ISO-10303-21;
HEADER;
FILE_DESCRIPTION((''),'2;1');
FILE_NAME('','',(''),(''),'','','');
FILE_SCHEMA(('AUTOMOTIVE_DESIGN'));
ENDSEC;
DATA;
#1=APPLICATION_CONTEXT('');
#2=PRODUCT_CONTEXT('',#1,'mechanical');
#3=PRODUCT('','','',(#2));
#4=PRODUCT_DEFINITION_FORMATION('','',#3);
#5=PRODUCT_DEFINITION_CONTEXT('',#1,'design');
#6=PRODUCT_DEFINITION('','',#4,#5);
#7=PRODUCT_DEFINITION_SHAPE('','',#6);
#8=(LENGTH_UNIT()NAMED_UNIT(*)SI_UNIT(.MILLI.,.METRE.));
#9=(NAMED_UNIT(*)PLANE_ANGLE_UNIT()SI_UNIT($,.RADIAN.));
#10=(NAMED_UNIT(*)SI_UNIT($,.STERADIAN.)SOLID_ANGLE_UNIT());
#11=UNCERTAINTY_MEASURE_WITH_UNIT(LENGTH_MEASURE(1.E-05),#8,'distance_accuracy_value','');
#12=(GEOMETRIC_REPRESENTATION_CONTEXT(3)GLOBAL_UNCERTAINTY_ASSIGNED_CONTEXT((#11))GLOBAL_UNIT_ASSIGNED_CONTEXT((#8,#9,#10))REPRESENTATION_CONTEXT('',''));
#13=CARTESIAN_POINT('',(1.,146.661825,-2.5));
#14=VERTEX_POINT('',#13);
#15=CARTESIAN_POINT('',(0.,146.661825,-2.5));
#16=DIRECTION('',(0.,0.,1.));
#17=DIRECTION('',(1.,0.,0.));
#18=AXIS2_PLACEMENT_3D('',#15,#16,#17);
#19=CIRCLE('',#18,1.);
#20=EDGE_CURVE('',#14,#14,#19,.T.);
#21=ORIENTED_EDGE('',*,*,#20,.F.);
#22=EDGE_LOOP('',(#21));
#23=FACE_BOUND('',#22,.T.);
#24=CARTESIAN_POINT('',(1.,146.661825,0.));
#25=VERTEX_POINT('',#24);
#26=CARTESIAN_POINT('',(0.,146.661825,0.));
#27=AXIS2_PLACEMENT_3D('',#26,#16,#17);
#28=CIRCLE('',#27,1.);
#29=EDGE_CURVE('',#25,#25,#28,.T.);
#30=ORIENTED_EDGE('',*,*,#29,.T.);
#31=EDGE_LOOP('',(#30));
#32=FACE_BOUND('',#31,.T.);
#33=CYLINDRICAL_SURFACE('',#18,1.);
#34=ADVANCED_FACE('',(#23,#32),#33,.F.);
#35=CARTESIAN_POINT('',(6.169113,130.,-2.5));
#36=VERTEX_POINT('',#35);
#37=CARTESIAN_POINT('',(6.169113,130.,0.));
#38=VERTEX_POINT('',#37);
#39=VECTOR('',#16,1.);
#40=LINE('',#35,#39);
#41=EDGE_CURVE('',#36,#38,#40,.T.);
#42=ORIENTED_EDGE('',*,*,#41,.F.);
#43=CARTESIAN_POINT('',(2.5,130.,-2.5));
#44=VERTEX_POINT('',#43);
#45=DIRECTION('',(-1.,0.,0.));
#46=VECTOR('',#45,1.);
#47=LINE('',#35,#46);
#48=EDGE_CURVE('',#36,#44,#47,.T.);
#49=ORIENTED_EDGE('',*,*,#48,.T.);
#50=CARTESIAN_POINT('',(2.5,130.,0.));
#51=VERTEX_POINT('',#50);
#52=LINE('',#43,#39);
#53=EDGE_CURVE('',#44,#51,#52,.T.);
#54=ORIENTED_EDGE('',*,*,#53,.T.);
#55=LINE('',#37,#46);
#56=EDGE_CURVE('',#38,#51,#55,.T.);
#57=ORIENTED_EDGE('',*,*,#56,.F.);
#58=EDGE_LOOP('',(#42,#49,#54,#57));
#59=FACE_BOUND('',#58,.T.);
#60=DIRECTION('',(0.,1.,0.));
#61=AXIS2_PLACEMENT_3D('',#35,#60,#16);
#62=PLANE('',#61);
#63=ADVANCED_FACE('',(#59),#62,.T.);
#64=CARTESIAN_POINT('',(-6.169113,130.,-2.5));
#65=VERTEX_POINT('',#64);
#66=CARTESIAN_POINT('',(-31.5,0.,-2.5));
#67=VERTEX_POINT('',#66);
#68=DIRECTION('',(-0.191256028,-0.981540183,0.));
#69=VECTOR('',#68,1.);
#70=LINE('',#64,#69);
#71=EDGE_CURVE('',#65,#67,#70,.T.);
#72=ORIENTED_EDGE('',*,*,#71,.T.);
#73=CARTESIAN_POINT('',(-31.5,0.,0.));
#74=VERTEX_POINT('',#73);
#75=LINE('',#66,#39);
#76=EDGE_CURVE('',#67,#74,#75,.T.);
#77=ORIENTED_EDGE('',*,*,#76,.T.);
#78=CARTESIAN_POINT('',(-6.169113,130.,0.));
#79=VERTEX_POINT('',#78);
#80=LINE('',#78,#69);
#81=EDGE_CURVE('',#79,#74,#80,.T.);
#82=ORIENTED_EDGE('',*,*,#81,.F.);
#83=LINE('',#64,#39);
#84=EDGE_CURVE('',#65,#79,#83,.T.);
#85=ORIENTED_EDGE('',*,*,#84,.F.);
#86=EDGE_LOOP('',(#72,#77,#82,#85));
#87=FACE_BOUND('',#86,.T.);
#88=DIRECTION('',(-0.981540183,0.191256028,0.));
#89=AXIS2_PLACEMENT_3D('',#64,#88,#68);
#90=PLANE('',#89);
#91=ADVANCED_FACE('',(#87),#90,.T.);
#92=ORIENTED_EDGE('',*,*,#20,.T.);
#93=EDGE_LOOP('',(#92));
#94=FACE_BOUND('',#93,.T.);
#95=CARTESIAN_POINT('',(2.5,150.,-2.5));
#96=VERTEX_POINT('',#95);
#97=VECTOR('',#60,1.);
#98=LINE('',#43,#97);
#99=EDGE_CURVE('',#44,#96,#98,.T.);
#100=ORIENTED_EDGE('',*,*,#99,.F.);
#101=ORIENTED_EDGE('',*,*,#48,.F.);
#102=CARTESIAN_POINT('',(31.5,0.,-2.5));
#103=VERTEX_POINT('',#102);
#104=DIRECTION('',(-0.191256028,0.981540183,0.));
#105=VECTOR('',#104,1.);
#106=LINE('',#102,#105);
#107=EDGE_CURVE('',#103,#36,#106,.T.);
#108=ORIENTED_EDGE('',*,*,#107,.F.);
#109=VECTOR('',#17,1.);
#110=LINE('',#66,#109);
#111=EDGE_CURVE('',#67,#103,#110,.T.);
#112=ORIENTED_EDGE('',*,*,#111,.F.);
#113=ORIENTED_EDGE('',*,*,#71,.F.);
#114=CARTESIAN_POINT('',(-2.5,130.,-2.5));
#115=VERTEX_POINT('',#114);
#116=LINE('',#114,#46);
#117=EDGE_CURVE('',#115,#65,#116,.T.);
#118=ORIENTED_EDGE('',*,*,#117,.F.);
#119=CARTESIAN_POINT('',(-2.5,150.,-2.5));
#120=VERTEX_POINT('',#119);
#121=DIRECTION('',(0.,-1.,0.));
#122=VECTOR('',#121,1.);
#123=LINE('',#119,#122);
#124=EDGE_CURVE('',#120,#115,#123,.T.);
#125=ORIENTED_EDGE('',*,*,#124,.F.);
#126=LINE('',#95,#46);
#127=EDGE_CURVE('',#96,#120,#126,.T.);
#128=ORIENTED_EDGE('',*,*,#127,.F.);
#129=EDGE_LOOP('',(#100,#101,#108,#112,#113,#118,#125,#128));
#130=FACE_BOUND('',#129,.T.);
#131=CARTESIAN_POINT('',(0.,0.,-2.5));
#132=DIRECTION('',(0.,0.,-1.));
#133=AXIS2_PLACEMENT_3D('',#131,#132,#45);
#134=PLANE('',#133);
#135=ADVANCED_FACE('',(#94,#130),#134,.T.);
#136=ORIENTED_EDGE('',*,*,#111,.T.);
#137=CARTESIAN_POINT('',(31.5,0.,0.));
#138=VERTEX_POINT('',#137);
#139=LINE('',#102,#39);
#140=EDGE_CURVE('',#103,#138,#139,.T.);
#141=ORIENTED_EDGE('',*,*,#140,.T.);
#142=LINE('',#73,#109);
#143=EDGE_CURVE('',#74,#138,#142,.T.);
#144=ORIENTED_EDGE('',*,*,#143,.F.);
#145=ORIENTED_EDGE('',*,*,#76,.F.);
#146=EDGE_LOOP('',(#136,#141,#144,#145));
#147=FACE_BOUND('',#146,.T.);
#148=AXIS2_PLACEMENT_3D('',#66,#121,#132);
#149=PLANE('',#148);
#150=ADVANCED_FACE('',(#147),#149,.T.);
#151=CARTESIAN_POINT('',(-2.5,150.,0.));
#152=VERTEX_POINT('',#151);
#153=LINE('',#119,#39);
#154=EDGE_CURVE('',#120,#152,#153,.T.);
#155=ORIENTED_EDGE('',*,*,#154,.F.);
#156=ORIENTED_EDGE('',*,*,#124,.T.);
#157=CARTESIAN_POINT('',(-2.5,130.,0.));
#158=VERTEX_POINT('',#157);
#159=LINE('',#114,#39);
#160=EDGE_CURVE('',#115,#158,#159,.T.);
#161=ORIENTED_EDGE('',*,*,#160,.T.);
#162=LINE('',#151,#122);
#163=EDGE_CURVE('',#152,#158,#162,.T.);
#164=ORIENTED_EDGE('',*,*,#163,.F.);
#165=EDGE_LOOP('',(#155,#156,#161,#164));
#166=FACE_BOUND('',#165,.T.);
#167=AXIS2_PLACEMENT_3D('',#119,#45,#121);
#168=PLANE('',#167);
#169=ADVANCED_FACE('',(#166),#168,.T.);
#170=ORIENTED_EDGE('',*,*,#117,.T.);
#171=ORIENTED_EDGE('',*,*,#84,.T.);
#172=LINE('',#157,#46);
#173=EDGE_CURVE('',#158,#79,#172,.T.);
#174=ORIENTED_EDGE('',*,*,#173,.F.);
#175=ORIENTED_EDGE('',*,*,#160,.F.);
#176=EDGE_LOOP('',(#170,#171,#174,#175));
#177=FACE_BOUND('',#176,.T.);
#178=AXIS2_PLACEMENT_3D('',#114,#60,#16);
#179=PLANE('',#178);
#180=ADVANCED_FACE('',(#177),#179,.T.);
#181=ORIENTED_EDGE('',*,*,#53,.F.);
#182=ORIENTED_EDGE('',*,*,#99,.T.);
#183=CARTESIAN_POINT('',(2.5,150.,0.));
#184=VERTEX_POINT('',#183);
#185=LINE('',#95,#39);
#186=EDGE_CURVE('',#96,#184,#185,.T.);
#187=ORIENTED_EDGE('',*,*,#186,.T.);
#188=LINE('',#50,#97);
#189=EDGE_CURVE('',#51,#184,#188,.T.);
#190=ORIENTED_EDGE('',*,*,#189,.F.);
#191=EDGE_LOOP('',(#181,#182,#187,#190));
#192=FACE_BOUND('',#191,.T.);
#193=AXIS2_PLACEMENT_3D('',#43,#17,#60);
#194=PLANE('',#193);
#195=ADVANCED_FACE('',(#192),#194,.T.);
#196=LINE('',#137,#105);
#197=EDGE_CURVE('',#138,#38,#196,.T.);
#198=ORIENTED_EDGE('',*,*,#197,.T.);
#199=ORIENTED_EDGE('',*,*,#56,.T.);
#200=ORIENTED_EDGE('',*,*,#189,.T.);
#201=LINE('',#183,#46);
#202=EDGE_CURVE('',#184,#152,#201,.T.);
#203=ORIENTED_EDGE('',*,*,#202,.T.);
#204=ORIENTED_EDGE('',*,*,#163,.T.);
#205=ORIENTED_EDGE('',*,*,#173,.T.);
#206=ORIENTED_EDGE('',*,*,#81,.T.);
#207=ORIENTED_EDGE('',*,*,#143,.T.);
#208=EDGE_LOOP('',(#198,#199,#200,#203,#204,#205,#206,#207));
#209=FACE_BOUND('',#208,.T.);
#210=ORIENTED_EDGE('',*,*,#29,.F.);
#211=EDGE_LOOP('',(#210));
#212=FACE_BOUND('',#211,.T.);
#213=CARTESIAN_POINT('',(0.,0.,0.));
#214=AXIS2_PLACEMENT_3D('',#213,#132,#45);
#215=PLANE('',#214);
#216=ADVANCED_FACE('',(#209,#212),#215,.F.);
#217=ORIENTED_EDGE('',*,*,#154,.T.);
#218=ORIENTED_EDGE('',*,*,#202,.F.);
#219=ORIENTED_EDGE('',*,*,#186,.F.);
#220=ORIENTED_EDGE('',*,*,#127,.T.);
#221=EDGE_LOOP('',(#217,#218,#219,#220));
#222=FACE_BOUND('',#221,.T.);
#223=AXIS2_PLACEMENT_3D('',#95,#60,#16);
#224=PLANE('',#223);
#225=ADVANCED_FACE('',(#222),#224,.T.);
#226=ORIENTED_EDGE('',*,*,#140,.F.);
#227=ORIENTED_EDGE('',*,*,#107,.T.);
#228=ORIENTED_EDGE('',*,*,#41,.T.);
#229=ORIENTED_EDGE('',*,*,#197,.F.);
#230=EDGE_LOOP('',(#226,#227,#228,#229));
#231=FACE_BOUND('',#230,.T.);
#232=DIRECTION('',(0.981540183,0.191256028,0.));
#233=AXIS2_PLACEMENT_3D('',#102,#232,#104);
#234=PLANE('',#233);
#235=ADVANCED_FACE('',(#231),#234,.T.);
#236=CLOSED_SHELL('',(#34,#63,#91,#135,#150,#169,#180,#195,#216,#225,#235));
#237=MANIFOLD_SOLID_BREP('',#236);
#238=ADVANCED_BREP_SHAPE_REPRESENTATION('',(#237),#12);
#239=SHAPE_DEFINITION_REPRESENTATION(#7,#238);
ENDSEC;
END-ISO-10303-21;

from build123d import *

# Parameters (mm, degrees)
BASE_FLANGE1_DEPTH = 2.5
SKETCH8_R          = 1
CUT_EXTRUDE1_DEPTH = 10


# Sheet-metal steps are written as plain solids
with BuildPart() as part:
    # Sketch1 → Base-Flange1 (new body)
    with BuildSketch(Plane.XY):
        Polygon((-31.5, 0), (31.5, 0), (6.169112777, 130), (2.5, 130), (2.5, 150), (-2.5, 150), (-2.5, 130), (-6.169112777, 130), align=None)
    extrude(amount=-BASE_FLANGE1_DEPTH)

    # Sketch8 → Cut-Extrude1 (cut)
    with BuildSketch(Plane.XY):
        with Locations((0, 146.661825485)):
            Circle(SKETCH8_R)
    extrude(amount=-CUT_EXTRUDE1_DEPTH, mode=Mode.SUBTRACT)


solid = part.part
